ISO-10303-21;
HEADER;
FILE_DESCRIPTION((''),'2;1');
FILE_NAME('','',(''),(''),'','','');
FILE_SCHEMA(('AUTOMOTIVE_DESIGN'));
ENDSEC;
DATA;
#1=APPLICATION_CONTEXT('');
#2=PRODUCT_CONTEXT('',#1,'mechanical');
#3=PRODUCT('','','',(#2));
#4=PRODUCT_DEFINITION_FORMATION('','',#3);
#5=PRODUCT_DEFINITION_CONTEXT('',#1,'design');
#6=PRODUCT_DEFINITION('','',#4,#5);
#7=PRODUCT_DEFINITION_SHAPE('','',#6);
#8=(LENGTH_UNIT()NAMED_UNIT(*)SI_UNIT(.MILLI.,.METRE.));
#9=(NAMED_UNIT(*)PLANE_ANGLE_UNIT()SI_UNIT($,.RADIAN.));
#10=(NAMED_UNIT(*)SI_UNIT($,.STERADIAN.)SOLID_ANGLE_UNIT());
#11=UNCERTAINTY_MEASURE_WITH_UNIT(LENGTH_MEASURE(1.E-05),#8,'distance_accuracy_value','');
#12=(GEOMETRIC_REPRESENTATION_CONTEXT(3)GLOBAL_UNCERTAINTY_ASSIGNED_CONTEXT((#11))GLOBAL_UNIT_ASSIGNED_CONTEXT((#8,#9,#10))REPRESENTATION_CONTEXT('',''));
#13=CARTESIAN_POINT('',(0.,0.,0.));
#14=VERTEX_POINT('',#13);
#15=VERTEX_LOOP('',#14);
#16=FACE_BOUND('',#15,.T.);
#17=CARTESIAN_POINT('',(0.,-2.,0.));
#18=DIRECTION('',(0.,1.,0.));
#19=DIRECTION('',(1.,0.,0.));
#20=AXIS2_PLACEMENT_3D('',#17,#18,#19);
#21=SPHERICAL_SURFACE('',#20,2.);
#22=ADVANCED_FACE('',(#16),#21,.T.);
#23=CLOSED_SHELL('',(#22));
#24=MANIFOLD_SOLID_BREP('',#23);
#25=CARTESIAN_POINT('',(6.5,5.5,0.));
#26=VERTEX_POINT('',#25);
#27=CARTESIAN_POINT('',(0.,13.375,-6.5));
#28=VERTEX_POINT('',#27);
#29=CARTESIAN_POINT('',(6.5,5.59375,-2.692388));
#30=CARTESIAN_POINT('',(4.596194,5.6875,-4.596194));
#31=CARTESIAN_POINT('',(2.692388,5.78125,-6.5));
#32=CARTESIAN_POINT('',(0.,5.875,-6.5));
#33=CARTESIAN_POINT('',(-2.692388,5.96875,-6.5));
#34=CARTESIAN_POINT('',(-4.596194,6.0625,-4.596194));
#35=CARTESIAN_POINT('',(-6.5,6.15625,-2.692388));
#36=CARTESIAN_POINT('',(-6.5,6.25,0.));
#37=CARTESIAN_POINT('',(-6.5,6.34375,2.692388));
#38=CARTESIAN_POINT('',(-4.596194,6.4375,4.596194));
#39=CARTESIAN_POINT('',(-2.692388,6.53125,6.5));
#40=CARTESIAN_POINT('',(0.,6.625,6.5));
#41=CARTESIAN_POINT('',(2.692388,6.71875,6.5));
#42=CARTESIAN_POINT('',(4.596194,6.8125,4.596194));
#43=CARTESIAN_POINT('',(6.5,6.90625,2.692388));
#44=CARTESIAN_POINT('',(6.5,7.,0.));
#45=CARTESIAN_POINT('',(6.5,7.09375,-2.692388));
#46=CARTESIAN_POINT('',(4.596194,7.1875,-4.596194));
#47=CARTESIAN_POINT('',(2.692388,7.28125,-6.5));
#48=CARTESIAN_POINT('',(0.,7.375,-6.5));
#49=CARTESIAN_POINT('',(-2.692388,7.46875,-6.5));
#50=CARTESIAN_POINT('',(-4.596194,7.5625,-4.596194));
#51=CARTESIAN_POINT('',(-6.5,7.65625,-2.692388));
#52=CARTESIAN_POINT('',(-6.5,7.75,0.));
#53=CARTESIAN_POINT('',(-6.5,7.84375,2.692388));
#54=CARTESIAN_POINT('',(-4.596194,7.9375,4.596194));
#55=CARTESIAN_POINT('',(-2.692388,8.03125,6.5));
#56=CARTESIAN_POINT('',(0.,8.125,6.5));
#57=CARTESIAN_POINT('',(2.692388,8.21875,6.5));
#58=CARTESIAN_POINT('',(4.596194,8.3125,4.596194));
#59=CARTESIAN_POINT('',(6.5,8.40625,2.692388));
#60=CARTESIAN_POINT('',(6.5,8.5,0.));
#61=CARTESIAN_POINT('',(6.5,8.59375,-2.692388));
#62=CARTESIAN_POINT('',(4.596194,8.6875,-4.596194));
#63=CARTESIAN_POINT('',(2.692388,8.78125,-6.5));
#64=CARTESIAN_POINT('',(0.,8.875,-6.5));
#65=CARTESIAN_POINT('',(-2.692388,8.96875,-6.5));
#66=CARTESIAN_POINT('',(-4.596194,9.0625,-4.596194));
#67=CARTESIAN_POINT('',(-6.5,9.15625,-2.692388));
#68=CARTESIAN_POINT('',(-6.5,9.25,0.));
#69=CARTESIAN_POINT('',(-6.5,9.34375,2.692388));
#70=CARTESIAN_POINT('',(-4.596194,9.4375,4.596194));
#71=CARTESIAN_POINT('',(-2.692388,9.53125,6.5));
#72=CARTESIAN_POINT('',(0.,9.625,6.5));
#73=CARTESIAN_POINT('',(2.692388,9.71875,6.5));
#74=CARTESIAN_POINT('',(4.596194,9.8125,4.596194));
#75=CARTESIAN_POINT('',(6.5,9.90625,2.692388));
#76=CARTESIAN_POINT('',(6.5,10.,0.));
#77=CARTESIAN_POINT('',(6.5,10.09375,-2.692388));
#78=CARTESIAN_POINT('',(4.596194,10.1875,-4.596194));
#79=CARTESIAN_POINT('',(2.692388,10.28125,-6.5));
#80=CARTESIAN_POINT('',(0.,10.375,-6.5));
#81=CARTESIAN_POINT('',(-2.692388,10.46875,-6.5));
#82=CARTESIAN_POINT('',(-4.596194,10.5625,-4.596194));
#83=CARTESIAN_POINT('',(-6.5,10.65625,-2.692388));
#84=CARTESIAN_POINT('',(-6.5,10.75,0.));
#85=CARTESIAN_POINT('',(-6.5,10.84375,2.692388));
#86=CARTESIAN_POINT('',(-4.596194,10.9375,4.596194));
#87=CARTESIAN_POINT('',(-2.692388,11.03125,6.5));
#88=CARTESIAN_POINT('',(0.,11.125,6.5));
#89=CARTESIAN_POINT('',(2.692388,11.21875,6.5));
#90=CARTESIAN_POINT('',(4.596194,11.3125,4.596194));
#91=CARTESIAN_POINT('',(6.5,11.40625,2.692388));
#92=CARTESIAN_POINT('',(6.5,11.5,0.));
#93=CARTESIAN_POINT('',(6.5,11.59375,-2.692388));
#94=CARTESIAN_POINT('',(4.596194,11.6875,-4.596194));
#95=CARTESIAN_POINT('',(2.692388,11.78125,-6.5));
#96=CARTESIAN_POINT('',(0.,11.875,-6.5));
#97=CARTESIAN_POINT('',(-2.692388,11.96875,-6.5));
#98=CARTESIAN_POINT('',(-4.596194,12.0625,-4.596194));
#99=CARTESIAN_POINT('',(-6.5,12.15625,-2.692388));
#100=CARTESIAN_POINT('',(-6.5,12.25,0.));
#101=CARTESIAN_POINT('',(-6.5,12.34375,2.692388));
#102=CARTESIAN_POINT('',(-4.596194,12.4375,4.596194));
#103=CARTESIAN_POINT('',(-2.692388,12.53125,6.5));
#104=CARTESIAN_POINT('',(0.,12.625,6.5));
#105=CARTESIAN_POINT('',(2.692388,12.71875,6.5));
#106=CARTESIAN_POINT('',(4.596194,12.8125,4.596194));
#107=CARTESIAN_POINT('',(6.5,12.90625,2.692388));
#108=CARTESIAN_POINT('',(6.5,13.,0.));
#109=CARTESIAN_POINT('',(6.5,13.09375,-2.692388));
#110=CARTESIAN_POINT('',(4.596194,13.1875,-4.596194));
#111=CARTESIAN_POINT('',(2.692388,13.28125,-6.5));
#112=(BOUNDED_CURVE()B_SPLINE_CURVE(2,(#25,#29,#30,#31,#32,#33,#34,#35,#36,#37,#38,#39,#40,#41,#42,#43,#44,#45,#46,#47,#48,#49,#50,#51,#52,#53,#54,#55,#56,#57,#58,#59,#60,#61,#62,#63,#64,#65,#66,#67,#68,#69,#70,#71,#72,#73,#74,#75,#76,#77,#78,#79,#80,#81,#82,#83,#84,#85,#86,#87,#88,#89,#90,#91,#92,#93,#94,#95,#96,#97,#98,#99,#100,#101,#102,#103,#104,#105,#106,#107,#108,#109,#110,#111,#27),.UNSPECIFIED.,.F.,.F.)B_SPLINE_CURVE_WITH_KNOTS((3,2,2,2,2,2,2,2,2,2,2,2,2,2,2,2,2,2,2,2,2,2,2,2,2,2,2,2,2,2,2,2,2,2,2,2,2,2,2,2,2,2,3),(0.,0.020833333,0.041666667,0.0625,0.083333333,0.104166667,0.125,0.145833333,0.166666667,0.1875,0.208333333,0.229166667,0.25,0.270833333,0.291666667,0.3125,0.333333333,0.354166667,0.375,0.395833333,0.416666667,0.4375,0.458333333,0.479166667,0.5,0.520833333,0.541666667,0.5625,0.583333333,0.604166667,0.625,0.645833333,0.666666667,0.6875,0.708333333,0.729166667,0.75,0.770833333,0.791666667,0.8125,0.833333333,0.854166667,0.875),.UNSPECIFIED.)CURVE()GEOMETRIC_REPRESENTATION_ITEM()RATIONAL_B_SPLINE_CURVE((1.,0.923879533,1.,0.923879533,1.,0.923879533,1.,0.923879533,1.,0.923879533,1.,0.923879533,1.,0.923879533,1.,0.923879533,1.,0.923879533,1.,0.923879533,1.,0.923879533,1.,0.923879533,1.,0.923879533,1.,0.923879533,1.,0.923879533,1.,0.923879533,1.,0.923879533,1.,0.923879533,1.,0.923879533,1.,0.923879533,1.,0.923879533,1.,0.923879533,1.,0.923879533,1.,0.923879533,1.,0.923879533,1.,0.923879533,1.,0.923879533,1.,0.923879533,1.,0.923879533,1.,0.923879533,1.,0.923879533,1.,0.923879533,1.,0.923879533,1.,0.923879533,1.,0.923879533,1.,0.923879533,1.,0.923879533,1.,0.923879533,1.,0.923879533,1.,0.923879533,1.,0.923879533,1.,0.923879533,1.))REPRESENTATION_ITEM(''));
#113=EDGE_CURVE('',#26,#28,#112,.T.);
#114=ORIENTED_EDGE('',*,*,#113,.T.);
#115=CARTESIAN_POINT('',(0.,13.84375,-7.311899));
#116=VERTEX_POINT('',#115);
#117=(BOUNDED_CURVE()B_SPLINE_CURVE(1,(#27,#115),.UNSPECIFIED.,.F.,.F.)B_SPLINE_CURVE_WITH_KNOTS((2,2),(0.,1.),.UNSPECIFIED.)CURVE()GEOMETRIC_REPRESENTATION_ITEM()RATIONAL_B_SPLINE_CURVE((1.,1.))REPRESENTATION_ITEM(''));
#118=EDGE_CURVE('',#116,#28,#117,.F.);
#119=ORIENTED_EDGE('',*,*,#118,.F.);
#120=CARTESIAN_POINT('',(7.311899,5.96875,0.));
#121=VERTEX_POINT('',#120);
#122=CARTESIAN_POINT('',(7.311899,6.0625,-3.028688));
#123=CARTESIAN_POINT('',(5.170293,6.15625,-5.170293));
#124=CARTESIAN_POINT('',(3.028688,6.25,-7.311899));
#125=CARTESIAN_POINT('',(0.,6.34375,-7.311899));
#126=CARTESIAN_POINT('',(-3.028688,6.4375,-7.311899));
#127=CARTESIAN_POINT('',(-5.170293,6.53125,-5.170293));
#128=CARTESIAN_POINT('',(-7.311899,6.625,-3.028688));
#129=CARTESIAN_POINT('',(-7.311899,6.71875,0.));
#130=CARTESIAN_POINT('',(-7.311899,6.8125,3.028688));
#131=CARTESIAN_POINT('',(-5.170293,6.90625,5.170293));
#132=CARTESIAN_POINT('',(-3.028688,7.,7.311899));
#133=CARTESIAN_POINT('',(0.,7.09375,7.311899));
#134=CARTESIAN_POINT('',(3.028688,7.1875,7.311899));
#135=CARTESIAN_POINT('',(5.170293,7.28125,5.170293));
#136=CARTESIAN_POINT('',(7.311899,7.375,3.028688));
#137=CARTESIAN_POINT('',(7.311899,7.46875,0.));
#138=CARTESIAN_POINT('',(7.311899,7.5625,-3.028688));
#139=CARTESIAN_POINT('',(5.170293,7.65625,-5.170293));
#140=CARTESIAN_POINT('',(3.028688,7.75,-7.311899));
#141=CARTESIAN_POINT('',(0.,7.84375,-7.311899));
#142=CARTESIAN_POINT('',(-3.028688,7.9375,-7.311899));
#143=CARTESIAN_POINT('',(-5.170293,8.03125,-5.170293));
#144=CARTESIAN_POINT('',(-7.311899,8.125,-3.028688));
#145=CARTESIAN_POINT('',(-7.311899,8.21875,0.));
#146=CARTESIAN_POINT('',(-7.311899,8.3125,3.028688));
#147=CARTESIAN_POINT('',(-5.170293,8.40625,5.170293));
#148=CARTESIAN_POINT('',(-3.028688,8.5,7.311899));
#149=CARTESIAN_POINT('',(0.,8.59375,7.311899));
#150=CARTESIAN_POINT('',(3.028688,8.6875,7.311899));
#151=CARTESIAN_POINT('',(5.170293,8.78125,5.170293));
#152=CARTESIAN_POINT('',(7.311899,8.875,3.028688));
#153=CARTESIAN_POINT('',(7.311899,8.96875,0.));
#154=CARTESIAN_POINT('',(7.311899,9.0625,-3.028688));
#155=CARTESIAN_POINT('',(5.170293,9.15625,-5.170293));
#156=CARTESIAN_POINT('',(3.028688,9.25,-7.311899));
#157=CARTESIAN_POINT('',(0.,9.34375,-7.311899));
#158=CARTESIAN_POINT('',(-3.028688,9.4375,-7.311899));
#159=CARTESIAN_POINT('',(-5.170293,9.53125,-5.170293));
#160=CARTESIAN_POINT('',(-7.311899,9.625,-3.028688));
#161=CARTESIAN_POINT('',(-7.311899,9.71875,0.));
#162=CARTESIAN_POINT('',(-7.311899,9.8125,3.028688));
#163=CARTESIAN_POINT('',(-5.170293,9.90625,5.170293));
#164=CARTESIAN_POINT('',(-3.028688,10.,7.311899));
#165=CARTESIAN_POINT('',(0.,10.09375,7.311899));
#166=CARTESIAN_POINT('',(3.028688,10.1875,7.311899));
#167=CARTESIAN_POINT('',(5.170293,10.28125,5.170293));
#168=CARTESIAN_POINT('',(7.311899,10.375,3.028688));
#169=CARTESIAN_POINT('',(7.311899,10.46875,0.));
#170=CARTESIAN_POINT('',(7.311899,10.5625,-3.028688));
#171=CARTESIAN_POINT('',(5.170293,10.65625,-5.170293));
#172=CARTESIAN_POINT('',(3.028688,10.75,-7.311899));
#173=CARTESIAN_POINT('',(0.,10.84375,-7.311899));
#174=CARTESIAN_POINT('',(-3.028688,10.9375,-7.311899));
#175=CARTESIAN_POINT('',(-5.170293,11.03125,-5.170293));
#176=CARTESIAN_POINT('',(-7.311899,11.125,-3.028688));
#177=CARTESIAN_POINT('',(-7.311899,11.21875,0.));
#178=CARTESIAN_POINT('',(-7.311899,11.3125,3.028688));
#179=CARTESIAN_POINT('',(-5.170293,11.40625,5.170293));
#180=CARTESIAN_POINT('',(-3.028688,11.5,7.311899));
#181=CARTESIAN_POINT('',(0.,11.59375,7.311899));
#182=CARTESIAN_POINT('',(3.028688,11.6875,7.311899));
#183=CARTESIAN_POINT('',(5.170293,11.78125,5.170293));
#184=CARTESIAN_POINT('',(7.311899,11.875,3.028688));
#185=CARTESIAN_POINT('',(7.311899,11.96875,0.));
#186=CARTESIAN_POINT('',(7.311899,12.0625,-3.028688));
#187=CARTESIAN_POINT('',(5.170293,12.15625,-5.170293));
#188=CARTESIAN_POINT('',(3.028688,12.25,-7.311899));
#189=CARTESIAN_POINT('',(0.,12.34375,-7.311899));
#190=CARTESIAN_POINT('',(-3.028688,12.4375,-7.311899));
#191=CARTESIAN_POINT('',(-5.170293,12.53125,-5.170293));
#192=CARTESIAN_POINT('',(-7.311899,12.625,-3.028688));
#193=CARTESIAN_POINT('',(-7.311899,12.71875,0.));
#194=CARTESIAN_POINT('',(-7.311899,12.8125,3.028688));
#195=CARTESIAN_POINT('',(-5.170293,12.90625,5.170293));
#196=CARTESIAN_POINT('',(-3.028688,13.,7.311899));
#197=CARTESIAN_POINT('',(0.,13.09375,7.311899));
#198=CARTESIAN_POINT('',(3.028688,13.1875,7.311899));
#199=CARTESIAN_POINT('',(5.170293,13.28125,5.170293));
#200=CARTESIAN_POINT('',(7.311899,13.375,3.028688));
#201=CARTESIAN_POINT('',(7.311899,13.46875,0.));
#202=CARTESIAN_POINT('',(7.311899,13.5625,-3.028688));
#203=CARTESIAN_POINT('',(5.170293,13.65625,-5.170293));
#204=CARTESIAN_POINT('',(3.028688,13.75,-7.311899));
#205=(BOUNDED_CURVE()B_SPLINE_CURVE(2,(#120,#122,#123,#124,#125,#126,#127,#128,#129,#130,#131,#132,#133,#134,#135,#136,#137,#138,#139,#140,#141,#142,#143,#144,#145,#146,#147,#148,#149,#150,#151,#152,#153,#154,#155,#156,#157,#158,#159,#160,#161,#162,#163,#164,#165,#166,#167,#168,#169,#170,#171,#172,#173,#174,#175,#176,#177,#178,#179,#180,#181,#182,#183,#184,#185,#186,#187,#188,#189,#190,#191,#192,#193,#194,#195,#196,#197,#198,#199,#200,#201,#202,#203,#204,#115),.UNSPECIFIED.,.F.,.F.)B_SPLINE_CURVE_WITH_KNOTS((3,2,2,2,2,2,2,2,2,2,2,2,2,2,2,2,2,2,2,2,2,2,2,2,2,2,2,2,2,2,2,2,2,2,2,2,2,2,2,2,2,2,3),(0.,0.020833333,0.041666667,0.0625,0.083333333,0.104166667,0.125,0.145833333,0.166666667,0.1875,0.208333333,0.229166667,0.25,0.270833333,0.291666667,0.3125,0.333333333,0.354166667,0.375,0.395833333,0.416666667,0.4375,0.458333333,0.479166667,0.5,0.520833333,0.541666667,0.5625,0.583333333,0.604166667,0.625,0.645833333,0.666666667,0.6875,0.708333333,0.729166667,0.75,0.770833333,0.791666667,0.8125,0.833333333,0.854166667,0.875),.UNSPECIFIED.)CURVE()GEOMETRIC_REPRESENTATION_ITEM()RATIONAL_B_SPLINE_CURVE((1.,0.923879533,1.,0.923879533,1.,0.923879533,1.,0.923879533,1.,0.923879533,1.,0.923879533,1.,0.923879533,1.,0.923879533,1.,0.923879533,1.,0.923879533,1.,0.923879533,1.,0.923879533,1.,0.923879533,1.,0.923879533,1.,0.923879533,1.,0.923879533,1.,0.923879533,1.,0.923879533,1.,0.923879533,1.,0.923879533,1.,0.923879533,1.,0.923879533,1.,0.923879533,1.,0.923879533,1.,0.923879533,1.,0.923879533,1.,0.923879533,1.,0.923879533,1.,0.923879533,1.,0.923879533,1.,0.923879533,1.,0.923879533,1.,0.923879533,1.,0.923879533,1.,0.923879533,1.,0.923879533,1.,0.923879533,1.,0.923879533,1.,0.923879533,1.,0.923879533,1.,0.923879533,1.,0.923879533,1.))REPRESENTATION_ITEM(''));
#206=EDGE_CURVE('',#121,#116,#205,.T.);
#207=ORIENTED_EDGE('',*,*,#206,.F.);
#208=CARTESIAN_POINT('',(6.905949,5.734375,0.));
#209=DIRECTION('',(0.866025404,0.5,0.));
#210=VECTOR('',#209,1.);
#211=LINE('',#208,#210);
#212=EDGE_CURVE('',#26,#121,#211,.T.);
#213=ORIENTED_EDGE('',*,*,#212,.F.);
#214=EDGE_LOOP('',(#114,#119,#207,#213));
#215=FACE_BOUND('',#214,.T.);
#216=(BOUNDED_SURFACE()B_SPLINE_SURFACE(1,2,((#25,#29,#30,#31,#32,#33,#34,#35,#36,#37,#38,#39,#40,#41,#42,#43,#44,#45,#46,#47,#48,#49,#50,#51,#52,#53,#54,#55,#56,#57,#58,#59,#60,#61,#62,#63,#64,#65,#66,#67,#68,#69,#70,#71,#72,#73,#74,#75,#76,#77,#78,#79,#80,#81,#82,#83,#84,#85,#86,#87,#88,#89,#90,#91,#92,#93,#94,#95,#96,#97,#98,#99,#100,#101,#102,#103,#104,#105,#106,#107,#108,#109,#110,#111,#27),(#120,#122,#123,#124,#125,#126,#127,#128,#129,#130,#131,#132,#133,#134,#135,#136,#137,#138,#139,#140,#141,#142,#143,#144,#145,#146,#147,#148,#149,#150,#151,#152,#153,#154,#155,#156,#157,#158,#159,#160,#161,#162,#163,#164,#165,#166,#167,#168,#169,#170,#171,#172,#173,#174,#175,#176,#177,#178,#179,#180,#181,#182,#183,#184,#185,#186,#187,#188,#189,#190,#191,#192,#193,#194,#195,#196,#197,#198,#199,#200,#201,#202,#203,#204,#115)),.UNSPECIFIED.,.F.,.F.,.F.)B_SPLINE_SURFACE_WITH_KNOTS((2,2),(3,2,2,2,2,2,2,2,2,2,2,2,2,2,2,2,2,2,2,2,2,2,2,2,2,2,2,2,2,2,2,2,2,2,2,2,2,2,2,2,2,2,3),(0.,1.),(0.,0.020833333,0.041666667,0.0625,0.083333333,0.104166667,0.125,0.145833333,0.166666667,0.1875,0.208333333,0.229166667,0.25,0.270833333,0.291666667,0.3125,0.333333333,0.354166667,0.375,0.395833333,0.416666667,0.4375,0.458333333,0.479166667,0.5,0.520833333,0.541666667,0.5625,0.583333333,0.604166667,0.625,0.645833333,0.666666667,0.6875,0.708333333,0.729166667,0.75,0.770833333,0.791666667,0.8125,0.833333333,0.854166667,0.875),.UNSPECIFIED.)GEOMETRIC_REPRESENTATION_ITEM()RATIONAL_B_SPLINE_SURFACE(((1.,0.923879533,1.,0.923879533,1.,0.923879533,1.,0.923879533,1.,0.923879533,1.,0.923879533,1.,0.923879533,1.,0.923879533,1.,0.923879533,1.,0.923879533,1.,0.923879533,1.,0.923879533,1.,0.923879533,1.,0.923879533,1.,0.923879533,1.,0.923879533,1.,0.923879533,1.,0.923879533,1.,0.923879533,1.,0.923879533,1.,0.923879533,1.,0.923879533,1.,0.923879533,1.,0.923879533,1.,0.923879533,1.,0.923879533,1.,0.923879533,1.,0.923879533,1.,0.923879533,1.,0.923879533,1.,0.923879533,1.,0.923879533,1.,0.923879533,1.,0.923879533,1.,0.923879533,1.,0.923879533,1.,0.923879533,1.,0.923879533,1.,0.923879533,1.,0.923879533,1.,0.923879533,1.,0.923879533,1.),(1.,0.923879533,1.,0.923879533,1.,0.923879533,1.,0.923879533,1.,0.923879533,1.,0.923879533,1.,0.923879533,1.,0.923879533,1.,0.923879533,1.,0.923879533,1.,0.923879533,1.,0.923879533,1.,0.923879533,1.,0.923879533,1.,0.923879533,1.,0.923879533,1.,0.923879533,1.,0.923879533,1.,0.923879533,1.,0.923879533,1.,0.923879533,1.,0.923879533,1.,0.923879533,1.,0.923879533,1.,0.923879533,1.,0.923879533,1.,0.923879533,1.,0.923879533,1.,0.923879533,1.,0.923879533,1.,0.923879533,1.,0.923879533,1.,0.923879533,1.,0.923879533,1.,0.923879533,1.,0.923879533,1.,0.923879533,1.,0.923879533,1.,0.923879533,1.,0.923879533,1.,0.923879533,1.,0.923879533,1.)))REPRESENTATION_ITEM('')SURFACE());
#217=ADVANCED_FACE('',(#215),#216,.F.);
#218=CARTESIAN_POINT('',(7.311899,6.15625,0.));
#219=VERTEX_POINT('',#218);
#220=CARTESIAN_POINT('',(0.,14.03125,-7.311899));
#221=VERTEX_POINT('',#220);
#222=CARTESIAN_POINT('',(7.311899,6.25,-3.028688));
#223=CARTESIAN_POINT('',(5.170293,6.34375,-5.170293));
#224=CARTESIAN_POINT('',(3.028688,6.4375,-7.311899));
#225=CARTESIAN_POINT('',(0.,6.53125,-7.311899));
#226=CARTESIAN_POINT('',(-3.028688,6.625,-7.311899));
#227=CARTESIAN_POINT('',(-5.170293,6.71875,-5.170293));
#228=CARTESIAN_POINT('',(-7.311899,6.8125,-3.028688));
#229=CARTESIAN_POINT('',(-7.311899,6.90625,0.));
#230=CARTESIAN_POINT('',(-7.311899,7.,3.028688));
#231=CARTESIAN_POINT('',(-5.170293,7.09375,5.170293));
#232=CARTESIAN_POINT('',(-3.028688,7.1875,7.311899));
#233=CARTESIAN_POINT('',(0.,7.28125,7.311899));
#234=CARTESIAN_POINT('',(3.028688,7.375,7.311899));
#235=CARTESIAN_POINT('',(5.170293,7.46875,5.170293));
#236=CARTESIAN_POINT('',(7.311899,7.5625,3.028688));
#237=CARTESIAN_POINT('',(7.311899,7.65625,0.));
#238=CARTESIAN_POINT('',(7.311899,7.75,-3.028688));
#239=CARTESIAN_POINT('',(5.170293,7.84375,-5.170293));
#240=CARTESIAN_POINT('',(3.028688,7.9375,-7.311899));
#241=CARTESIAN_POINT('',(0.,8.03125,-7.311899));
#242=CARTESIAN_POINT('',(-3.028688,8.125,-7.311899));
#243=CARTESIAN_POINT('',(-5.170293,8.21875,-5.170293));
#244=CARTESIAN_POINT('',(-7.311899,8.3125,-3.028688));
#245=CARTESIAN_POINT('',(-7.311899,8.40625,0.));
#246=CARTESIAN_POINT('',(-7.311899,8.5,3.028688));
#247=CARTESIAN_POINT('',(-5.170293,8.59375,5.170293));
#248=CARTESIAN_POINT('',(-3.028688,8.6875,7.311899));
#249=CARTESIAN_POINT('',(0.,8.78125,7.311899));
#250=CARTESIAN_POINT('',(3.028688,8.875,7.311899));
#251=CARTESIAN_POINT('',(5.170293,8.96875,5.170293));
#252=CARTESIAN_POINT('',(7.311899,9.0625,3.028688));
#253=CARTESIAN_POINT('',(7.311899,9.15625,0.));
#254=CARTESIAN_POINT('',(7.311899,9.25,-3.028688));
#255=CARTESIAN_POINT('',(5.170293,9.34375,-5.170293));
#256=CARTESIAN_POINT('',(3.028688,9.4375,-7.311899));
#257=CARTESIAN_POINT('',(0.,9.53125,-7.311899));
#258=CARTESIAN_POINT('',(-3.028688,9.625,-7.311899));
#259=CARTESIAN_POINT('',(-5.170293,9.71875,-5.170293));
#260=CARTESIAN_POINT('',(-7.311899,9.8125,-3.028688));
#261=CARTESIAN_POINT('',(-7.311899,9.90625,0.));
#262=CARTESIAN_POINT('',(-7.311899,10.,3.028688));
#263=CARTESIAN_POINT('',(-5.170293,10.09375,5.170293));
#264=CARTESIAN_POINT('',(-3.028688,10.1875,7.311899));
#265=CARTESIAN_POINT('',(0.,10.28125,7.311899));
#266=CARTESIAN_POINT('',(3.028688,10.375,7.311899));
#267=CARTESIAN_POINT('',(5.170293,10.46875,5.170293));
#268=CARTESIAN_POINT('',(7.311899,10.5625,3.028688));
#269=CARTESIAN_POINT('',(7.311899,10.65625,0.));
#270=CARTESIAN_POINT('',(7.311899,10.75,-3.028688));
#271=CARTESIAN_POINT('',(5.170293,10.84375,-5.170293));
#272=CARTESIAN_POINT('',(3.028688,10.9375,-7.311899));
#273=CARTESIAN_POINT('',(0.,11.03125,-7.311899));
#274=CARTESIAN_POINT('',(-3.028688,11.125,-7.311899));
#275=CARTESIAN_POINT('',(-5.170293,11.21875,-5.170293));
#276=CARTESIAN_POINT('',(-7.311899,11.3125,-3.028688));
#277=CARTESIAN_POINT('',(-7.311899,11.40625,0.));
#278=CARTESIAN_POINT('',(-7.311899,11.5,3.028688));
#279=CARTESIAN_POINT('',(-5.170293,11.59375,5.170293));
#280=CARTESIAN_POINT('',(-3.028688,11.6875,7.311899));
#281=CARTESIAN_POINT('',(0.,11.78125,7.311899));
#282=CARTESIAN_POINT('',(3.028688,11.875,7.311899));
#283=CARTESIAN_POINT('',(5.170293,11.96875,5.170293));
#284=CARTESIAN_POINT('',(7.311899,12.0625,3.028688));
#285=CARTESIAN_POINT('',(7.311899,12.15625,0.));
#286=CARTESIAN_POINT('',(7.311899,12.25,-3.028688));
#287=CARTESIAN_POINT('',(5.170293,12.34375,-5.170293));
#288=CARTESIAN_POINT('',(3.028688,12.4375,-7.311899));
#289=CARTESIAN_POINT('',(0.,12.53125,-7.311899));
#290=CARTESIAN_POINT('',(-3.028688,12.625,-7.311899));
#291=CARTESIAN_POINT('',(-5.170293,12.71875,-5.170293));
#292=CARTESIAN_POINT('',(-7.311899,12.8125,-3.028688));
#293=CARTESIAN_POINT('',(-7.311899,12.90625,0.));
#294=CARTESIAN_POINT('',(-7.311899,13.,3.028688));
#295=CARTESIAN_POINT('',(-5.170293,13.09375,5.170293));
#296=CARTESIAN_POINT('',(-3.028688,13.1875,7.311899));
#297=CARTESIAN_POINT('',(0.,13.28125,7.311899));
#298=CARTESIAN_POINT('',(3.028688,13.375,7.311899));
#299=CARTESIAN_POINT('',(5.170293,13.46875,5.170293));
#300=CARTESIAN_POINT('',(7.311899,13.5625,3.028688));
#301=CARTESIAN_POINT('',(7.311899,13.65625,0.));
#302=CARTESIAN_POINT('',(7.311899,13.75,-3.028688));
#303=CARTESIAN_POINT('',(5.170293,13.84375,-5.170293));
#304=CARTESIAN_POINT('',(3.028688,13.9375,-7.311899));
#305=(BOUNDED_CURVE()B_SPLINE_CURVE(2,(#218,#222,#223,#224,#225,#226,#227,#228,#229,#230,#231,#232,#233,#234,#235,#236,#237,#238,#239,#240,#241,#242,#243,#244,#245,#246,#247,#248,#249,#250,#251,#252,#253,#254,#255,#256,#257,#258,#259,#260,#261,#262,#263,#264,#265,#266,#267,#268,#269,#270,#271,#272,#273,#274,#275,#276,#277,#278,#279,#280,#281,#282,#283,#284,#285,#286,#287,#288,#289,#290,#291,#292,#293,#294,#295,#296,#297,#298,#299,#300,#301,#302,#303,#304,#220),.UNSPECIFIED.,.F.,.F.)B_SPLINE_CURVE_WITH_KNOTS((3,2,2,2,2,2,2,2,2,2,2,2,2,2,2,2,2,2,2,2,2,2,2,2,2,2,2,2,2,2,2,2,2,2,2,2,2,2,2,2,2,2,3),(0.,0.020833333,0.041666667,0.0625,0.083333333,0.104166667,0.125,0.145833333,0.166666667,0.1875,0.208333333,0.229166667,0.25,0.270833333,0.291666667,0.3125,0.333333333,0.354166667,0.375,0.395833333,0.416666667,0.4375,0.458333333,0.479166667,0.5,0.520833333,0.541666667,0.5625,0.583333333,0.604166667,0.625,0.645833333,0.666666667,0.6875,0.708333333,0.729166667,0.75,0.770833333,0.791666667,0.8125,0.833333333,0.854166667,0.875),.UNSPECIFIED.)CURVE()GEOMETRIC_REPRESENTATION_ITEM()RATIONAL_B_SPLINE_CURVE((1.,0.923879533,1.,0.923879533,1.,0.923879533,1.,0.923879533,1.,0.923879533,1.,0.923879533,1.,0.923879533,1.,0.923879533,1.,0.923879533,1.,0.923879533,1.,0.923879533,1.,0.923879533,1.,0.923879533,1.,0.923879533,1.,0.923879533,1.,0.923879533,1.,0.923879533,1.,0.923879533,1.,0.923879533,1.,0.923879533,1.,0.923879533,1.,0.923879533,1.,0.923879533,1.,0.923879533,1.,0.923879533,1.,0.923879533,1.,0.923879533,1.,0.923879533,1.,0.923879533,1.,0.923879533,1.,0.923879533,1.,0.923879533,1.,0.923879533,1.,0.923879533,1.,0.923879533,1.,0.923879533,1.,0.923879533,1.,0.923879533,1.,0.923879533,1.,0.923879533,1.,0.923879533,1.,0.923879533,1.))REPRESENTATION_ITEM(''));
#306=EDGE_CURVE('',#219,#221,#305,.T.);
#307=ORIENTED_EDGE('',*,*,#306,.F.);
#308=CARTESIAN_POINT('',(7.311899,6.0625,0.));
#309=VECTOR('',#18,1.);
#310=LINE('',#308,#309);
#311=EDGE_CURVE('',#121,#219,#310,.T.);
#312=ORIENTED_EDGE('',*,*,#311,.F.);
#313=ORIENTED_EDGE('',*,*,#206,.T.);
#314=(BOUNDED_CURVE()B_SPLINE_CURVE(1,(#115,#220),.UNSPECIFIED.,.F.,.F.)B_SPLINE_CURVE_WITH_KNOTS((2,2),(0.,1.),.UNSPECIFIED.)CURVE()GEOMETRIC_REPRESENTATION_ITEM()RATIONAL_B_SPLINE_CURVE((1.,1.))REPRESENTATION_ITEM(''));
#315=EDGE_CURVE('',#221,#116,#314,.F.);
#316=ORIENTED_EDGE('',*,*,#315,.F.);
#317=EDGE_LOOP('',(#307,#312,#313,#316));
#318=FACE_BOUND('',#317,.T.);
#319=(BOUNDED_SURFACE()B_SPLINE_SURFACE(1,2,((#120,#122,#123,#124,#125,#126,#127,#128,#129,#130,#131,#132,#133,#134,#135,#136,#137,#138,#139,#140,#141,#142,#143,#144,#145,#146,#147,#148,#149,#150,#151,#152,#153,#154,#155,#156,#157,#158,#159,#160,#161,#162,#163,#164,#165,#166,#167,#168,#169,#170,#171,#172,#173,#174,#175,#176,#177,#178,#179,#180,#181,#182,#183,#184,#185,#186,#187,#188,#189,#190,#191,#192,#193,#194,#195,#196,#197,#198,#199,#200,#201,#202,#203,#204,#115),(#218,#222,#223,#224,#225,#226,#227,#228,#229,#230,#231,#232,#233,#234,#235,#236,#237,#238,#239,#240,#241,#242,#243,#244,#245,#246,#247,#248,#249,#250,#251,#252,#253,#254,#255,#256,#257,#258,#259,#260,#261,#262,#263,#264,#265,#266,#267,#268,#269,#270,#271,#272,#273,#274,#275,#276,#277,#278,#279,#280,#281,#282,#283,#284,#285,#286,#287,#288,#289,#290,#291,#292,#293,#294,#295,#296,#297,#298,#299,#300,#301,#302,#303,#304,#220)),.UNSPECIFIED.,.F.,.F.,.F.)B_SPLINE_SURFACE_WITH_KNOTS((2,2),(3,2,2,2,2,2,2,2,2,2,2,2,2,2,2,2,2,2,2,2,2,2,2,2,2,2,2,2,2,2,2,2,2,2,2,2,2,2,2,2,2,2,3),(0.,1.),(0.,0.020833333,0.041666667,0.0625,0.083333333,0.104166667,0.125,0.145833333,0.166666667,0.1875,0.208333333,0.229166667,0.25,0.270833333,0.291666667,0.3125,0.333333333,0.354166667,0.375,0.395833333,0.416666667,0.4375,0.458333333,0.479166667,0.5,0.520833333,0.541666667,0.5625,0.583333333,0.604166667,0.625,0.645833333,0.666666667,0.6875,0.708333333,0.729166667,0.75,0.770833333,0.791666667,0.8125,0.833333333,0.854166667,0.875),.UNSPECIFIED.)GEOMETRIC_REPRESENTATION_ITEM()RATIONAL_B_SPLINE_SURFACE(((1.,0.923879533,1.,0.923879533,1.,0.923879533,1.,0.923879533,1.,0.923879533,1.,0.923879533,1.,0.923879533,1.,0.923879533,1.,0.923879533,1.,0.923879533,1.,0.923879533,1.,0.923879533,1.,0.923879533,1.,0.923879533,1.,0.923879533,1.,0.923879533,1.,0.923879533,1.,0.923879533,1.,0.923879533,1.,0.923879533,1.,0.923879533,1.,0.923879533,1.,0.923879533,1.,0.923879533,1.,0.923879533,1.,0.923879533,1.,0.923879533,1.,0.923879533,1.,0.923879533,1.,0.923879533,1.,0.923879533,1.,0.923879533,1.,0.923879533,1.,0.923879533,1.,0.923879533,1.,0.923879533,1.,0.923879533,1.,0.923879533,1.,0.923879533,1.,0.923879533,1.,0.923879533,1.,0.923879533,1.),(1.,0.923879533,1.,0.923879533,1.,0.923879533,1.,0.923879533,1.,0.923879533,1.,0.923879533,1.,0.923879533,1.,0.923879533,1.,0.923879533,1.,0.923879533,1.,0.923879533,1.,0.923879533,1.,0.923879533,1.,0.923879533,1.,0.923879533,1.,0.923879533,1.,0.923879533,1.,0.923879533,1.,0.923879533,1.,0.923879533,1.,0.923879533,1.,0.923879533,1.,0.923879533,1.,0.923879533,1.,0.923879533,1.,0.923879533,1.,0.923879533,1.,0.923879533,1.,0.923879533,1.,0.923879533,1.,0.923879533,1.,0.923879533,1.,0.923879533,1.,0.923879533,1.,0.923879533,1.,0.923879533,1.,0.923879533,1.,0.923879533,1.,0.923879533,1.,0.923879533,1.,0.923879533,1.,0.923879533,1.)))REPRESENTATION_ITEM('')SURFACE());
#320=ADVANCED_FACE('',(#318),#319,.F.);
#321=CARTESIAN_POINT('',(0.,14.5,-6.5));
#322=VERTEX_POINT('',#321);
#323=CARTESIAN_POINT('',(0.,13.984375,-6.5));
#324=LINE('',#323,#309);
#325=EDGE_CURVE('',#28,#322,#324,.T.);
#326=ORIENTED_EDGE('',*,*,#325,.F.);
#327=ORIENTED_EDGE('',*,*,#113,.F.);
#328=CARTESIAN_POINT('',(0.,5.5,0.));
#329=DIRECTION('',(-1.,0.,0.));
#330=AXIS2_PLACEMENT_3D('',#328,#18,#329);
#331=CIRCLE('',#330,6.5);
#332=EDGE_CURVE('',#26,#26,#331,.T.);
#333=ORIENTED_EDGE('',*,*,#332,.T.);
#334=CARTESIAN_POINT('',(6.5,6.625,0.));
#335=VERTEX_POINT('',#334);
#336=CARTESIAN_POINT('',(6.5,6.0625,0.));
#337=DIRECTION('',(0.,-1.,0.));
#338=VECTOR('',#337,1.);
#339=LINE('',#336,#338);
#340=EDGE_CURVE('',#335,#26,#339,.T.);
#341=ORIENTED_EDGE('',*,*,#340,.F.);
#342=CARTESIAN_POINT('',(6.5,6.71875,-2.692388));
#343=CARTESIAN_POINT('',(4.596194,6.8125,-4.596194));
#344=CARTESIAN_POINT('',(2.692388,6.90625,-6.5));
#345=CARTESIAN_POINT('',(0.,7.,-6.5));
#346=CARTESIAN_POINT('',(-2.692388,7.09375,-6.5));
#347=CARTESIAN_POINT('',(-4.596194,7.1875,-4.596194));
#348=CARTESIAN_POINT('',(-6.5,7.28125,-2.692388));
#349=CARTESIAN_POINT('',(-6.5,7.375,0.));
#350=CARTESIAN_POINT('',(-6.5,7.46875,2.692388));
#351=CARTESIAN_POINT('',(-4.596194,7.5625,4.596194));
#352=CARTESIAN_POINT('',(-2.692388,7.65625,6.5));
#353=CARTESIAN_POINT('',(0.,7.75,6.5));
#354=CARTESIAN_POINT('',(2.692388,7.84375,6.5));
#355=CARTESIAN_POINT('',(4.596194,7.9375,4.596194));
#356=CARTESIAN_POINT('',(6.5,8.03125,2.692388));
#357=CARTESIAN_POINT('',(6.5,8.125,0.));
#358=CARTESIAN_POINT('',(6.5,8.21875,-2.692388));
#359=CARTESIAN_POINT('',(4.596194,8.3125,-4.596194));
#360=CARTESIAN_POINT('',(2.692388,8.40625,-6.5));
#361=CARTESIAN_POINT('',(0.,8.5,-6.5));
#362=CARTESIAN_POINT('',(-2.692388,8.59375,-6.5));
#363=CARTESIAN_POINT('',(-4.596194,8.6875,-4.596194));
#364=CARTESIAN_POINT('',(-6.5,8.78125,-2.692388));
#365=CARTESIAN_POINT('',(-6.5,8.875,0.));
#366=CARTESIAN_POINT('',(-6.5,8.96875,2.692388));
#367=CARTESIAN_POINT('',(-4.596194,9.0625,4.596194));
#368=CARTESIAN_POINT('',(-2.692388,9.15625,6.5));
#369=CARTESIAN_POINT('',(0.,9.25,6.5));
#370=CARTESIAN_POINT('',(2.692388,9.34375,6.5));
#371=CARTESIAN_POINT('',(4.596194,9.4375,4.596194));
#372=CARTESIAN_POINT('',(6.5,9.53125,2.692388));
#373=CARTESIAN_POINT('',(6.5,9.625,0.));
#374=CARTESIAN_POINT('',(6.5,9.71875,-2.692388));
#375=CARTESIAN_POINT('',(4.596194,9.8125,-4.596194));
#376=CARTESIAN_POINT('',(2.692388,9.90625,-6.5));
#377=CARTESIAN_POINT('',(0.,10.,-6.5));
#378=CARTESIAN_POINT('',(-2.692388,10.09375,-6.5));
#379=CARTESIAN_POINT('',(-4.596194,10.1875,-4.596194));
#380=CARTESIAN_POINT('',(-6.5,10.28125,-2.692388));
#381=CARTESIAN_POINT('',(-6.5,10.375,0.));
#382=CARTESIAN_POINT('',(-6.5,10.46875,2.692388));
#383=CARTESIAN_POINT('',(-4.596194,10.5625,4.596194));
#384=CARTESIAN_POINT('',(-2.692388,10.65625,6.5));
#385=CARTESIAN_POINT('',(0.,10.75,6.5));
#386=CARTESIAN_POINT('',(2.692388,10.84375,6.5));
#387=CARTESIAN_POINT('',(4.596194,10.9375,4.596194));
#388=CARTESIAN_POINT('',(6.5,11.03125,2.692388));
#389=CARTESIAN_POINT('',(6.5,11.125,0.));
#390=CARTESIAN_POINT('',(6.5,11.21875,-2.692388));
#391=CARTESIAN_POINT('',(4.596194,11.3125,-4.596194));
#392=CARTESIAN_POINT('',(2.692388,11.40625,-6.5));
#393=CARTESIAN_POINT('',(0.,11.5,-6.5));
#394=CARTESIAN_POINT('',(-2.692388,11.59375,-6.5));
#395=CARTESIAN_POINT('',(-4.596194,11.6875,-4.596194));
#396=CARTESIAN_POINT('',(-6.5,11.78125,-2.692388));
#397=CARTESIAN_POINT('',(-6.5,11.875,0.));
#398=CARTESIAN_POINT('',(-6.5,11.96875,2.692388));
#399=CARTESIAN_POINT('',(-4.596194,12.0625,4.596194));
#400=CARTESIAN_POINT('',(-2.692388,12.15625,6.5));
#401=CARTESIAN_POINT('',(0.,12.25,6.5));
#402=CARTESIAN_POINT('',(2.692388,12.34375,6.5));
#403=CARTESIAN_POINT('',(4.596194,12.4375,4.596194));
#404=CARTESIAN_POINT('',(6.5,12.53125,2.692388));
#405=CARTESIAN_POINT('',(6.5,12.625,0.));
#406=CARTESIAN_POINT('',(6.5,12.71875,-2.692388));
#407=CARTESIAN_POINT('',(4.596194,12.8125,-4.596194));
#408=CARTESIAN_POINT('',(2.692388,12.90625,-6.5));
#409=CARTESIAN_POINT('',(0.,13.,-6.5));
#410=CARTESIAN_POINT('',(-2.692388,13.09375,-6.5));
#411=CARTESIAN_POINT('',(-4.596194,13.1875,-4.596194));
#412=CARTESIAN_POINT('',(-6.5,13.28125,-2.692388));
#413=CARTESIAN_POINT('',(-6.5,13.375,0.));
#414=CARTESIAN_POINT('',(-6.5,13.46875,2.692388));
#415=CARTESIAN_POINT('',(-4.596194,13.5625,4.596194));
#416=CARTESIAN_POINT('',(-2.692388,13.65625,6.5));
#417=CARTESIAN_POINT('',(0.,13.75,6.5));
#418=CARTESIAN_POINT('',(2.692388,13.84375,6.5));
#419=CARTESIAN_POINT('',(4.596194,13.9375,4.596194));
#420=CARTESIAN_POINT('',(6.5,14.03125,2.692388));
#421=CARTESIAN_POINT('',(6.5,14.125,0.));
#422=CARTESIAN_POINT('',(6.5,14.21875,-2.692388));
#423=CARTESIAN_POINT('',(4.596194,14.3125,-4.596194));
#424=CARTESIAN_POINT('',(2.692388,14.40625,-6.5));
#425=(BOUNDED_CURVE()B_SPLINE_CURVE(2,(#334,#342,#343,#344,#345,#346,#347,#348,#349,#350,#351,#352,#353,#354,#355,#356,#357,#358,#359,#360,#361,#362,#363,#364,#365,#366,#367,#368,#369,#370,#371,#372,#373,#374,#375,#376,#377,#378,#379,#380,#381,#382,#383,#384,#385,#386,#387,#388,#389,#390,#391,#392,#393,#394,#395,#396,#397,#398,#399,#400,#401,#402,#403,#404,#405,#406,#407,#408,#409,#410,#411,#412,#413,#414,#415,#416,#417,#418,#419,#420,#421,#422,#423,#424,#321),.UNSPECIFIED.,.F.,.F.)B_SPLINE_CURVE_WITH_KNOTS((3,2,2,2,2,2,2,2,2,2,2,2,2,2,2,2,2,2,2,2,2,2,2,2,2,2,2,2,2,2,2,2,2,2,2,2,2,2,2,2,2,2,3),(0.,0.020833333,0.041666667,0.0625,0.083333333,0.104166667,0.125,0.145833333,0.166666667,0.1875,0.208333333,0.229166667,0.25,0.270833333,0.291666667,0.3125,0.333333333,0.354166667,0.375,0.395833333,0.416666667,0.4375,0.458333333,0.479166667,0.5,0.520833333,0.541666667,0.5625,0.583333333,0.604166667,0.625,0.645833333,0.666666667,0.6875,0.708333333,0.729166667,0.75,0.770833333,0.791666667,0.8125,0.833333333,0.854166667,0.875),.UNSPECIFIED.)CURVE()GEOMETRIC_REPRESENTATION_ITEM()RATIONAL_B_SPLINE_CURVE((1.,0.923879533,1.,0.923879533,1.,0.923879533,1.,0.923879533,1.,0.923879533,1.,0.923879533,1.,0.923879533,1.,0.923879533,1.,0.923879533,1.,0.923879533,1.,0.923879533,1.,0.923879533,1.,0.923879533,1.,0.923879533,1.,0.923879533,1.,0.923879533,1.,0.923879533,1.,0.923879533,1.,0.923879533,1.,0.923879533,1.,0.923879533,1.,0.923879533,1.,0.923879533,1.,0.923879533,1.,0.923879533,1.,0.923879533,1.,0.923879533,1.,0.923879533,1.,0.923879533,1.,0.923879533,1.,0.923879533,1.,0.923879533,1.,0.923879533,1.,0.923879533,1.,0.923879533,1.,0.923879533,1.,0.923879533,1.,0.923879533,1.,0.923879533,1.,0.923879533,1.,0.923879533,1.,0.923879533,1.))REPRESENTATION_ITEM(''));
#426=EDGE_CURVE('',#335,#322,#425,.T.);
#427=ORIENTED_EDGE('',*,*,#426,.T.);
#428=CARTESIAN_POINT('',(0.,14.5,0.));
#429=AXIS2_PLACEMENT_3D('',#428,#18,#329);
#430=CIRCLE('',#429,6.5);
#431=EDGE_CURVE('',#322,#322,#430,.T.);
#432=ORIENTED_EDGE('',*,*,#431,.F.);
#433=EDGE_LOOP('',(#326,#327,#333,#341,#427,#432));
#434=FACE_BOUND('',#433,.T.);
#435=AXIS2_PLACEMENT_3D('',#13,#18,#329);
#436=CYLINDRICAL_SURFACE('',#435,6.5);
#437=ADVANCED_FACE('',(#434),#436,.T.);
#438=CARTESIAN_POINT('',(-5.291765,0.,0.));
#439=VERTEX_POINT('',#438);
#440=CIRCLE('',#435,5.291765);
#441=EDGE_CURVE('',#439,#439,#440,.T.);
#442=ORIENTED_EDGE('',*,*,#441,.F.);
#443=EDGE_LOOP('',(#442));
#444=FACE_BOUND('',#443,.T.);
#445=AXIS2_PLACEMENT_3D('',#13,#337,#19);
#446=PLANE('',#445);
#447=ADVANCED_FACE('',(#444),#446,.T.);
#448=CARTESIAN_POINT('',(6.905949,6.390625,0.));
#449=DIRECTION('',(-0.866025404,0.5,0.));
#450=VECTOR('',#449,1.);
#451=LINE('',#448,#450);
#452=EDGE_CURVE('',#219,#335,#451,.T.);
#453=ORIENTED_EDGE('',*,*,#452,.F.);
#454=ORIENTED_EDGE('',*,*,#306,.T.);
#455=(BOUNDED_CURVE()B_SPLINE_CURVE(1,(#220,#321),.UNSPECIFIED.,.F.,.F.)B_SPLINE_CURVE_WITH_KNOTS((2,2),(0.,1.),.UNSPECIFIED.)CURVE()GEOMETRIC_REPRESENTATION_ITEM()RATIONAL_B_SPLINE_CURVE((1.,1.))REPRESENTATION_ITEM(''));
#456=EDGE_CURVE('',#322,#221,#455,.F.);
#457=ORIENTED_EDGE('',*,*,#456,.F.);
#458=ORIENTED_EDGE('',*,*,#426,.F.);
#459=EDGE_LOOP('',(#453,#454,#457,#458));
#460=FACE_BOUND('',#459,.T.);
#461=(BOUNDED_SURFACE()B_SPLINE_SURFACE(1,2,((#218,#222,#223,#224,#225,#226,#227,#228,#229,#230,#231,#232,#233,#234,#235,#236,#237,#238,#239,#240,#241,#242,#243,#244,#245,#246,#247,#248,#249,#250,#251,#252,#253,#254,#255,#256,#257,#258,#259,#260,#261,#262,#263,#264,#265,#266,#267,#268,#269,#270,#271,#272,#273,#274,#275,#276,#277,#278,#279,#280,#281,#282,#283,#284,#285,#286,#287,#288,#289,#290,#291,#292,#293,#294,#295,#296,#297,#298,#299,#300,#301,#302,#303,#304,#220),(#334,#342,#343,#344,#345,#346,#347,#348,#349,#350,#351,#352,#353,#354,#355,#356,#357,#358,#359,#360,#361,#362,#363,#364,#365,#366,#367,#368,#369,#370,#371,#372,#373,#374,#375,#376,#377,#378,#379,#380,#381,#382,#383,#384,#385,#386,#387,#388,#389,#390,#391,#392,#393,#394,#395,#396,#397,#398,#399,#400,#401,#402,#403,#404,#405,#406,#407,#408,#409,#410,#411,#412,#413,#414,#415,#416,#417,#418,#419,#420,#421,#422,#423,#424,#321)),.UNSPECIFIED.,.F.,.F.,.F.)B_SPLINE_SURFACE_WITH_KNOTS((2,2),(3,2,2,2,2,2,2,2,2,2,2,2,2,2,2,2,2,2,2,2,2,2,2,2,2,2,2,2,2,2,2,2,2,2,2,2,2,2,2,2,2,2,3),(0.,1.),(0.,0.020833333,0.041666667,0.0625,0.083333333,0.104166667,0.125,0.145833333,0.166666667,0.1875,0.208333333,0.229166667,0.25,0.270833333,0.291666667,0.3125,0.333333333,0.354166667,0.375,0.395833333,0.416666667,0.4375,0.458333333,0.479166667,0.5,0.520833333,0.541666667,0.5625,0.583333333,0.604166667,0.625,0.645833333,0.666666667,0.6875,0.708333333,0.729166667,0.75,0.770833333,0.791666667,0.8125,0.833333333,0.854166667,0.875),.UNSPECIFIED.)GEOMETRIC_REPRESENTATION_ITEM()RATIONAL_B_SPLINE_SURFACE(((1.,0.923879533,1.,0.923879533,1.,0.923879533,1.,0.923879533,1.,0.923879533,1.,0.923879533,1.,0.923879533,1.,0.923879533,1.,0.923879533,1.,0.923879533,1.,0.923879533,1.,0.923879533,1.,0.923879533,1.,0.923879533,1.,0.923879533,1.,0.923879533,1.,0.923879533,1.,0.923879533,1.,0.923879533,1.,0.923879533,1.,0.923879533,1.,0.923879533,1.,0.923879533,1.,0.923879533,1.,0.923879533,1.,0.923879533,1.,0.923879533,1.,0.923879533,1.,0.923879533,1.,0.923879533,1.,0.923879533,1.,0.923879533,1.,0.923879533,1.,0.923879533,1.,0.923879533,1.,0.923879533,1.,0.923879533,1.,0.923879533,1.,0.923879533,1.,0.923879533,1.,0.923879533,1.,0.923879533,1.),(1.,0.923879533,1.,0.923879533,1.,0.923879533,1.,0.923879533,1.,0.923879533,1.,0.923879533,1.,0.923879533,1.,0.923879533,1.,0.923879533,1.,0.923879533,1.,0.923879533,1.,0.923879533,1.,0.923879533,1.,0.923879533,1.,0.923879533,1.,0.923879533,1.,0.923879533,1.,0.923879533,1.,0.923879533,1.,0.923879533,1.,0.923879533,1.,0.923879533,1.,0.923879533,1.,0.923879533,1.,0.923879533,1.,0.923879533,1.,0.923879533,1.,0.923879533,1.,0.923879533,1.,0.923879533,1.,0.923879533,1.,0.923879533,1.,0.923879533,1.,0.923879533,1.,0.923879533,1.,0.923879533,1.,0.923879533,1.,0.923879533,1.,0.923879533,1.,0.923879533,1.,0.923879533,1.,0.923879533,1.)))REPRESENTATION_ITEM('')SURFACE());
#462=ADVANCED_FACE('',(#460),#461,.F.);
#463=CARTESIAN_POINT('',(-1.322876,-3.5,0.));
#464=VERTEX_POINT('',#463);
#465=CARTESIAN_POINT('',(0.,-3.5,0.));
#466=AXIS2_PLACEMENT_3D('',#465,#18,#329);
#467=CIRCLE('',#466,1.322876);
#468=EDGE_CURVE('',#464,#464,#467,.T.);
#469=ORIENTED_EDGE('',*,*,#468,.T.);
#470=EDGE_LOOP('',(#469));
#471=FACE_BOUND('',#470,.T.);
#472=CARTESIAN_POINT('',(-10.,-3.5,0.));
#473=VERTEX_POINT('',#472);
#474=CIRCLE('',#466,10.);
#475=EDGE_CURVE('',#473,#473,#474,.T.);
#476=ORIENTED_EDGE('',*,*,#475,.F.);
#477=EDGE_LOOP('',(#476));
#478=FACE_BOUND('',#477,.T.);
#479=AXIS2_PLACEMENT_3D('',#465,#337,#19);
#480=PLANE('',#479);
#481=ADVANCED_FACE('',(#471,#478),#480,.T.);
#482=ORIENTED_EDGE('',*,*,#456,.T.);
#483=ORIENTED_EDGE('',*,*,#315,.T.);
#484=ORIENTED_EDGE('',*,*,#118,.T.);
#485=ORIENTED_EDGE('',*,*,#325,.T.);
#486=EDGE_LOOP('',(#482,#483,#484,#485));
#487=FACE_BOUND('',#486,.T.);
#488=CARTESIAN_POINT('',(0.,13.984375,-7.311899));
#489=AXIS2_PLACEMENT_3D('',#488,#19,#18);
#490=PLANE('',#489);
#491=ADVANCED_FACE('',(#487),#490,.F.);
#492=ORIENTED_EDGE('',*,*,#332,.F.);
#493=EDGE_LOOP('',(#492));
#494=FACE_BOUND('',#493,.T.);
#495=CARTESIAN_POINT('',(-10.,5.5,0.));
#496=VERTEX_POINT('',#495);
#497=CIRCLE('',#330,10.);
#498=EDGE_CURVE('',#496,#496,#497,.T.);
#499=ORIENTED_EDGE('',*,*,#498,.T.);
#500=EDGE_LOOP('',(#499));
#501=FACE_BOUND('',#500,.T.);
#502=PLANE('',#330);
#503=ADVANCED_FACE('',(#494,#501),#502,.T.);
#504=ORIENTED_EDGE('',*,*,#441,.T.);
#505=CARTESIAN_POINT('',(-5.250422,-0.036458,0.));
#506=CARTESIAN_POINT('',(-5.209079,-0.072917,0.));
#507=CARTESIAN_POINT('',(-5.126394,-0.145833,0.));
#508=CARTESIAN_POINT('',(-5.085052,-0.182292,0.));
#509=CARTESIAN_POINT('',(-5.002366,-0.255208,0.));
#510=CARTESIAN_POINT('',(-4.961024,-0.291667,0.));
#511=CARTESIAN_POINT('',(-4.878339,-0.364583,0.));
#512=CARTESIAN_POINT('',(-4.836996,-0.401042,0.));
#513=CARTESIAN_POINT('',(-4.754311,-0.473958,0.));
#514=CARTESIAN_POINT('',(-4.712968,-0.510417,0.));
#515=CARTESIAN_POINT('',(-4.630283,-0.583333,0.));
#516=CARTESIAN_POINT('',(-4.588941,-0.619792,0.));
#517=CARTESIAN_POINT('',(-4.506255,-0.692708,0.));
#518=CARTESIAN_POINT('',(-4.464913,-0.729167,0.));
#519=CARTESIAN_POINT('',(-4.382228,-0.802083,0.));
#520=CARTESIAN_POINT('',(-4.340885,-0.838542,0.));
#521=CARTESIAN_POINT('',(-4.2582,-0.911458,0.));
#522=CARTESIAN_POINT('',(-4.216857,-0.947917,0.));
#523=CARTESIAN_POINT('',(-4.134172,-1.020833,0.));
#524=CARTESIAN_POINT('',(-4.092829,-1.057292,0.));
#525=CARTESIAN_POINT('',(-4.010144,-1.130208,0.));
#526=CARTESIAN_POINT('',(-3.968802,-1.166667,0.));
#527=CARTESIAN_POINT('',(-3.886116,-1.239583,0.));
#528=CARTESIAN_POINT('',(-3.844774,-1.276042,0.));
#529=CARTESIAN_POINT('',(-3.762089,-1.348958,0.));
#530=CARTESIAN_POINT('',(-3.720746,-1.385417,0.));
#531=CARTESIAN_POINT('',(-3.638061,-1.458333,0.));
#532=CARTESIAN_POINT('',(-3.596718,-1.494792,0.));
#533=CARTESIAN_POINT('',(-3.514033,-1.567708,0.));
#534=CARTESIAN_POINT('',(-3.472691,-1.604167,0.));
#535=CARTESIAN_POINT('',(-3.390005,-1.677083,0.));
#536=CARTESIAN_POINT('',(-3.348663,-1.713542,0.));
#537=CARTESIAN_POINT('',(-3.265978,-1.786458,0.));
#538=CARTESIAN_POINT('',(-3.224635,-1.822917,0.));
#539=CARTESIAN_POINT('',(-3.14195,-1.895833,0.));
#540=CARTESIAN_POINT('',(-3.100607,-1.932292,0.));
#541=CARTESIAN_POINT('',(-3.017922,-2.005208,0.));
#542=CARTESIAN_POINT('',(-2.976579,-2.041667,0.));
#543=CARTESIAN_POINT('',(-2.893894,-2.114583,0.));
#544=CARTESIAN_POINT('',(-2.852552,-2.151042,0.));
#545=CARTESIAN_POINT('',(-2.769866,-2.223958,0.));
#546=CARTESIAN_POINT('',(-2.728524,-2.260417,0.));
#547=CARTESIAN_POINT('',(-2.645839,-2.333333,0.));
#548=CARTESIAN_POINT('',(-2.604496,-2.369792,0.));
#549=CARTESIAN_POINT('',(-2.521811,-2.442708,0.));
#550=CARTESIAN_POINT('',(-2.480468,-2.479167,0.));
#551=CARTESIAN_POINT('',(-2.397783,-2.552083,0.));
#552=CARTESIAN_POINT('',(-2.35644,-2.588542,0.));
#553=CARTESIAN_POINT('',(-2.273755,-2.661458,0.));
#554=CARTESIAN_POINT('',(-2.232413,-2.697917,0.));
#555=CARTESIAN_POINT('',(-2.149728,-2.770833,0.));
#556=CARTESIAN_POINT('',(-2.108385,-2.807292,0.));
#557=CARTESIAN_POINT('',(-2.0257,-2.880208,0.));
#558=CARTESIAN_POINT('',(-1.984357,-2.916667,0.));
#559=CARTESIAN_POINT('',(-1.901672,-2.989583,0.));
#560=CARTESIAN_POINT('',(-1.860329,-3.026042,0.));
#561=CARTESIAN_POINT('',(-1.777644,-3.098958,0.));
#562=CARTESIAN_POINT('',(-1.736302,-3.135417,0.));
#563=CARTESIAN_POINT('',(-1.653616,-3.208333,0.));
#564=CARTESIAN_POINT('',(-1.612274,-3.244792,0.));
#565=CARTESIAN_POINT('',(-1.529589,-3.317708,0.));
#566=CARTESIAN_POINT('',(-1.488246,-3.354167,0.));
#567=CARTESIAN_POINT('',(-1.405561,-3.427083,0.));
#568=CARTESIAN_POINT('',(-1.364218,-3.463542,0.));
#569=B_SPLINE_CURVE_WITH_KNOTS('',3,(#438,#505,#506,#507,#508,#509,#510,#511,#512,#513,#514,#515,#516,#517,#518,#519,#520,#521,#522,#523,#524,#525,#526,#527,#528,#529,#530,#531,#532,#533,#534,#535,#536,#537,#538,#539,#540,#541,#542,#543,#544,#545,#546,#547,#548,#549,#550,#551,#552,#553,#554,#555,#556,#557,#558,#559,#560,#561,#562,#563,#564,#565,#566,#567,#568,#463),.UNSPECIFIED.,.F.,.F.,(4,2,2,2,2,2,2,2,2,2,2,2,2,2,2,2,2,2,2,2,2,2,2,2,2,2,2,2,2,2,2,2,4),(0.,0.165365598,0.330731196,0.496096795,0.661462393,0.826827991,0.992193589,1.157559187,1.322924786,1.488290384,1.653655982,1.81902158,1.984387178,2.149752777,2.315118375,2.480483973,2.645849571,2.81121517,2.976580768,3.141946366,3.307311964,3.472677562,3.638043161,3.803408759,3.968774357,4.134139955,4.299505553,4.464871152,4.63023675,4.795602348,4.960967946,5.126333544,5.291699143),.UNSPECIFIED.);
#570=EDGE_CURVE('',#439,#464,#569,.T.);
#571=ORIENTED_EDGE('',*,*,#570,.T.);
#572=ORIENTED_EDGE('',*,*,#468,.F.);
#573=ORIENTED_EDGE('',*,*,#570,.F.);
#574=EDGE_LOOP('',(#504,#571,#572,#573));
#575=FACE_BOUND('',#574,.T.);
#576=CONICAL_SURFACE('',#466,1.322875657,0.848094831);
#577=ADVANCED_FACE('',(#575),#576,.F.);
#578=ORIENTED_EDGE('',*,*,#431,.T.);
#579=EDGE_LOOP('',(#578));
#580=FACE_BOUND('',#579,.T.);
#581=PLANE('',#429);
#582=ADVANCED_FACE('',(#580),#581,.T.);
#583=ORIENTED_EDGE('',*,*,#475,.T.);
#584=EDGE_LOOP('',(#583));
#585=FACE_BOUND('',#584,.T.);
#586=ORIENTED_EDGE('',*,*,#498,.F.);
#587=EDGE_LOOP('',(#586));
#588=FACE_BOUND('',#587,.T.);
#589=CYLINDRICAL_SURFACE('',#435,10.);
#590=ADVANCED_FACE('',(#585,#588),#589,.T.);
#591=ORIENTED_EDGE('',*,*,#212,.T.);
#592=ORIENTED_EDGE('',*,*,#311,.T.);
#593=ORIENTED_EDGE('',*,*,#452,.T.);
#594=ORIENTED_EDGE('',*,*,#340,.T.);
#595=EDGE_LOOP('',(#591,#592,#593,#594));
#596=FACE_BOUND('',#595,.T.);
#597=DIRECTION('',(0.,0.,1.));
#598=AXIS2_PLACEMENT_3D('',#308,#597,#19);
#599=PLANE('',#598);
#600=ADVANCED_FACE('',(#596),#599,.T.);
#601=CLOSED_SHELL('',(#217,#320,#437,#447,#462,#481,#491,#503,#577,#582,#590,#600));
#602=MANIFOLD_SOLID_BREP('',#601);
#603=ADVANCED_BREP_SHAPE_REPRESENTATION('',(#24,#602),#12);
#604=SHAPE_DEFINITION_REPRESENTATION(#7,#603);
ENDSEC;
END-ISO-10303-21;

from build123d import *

# Parameters (mm, degrees)
THREAD_2_PITCH = 1.5


with BuildPart() as part:
    # Sketch 2 → Повернуть1 (revolve)
    with BuildSketch(Plane.XY):
        Polygon((-1.322875657, -3.5), (-5.291764647, 0), (0, 0), (0, 14.5), (-6.5, 14.5), (-6.5, 5.5), (-10, 5.5), (-10, -3.5), align=None)
        with BuildLine():
            Line((0, 0), (0, -4))
            ThreePointArc((0, -4), (-2, -2), (0, 0))
        make_face()
    revolve(axis=Axis((0, 0, 0), (0, -1, 0)))

    # Резьба2: the profile of Sketch 2 2 profile screwed along a right-hand helix of 5.25 turns, 8 arcs to a turn; built about Z, then put on its axis
    thread_2_z = Axis((0, 0, 0), (0, 0, 1))
    thread_2_corners = [(6.4997, 0, -0.000173205), (7.311898812, 0, 0.468749998), (7.311898812, 0, 0.656249998), (6.4997, 0, 1.125173201)]
    with BuildLine(mode=Mode.PRIVATE) as thread_2_profile:
        Line(thread_2_corners[0], thread_2_corners[1])
        Line(thread_2_corners[1], thread_2_corners[2])
        Line(thread_2_corners[2], thread_2_corners[3])
        Line(thread_2_corners[3], thread_2_corners[0])
    thread_2_cap = Face(thread_2_profile.wire())
    thread_2_turn_angles = [0, 22.5, 45, 67.5, 90, 112.5, 135, 157.5, 180, 202.5, 225, 247.5, 270, 292.5, 315, 337.5, 360]
    thread_2_turn_weights = [1, 0.9238795325112867, 1, 0.9238795325112867, 1, 0.9238795325112867, 1, 0.9238795325112867, 1, 0.9238795325112867, 1, 0.9238795325112867, 1, 0.9238795325112867, 1, 0.9238795325112867, 1]
    thread_2_turn_rails = [Edge.make_bspline([Vector(p[0], p[1], 0).rotate(thread_2_z, thread_2_turn_angles[k]) / thread_2_turn_weights[k] + Vector(0, 0, p[2] + THREAD_2_PITCH * thread_2_turn_angles[k] / 360) for k in range(17)], [0, 0, 0, 1, 1, 2, 2, 3, 3, 4, 4, 5, 5, 6, 6, 7, 7, 8, 8, 8], 2, thread_2_turn_weights) for p in thread_2_corners]
    thread_2_turn_sides = [Face.make_surface_from_curves(thread_2_turn_rails[p[0]], thread_2_turn_rails[p[1]]) for p in [(0, 1), (1, 2), (2, 3), (3, 0)]]
    thread_2_last_angles = [1800, 1822.5, 1845, 1867.5, 1890]
    thread_2_last_weights = [1, 0.9238795325112867, 1, 0.9238795325112867, 1]
    thread_2_last_rails = [Edge.make_bspline([Vector(p[0], p[1], 0).rotate(thread_2_z, thread_2_last_angles[k]) / thread_2_last_weights[k] + Vector(0, 0, p[2] + THREAD_2_PITCH * thread_2_last_angles[k] / 360) for k in range(5)], [0, 0, 0, 1, 1, 2, 2, 2], 2, thread_2_last_weights) for p in thread_2_corners]
    thread_2_last_sides = [Face.make_surface_from_curves(thread_2_last_rails[p[0]], thread_2_last_rails[p[1]]) for p in [(0, 1), (1, 2), (2, 3), (3, 0)]]
    thread_2 = Plane(origin=(0, 5.5, 0), x_dir=(1, 0, 0), z_dir=(0, 1, 0)) * Solid(Shell([*[p.moved(Location((0, 0, THREAD_2_PITCH * i))) for i in range(5) for p in thread_2_turn_sides], *thread_2_last_sides, thread_2_cap, thread_2_cap.rotate(thread_2_z, 1890).moved(Location((0, 0, THREAD_2_PITCH * 1890 / 360)))]))
    add(thread_2)


solid = part.part
